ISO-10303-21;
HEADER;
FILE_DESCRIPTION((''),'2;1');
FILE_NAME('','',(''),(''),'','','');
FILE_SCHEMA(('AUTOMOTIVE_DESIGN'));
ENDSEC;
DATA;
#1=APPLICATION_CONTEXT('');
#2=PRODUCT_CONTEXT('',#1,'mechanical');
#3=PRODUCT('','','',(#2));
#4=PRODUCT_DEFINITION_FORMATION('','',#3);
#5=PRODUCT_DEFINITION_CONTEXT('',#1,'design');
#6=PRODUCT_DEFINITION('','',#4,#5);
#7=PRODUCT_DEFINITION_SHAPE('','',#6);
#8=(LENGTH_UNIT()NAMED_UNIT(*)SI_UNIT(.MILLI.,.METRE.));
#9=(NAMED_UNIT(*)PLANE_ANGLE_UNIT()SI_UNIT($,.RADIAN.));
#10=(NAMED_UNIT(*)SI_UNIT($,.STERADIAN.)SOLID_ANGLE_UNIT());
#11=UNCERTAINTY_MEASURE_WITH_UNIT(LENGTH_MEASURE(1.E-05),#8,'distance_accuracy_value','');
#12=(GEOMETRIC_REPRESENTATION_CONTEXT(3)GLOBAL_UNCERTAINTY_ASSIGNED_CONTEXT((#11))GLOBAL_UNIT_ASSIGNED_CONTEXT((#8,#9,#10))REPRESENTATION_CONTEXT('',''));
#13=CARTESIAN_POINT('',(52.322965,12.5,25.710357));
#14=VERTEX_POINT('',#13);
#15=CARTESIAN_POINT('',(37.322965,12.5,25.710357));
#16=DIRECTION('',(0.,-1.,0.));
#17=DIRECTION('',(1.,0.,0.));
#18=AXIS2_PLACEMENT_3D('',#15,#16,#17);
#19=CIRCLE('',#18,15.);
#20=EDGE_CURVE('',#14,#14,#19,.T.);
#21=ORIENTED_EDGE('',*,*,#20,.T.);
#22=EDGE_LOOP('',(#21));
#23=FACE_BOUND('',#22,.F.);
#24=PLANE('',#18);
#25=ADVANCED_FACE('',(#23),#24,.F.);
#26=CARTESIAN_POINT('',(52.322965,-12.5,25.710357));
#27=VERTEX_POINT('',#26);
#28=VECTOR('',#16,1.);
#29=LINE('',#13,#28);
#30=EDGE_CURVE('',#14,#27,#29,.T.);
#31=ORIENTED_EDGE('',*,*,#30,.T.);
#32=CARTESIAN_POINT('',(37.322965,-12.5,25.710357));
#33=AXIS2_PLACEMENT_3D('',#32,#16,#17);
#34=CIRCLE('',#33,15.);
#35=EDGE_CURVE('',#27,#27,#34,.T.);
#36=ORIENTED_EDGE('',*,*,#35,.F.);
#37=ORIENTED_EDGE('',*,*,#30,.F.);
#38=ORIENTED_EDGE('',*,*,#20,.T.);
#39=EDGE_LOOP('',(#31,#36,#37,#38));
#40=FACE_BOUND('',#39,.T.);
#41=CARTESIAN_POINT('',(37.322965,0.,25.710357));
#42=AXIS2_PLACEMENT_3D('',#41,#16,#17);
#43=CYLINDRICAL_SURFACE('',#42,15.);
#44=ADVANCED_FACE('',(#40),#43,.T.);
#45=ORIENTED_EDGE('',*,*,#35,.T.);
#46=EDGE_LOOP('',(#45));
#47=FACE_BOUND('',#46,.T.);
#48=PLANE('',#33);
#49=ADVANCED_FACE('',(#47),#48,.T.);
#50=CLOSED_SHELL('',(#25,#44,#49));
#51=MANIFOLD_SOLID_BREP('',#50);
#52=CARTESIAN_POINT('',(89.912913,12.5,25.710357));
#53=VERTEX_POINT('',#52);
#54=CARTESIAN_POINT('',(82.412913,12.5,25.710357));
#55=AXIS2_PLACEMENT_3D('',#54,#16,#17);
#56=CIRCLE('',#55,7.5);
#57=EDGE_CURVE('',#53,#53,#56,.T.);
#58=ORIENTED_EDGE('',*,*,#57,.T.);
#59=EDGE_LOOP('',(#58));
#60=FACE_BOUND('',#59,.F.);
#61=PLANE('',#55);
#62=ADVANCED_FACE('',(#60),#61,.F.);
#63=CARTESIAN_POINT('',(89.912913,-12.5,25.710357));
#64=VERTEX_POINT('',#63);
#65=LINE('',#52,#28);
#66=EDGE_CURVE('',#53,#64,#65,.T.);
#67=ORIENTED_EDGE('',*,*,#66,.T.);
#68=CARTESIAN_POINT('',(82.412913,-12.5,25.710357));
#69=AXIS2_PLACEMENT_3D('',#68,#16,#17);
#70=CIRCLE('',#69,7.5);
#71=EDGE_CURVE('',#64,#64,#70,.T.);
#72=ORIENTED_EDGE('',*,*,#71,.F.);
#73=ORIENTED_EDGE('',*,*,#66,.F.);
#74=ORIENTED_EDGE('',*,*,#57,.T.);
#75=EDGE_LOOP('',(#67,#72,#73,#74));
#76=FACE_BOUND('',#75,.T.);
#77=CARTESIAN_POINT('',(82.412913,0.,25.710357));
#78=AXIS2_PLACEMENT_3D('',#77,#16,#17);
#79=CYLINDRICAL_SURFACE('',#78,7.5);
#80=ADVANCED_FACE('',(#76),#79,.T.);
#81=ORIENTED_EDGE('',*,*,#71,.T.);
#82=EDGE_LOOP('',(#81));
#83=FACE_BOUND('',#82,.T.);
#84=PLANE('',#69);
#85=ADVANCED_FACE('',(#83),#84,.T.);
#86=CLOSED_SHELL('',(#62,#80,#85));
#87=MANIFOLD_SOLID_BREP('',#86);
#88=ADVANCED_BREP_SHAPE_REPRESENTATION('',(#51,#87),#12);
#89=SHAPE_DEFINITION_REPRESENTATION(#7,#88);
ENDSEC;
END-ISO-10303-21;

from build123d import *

# Parameters (mm, degrees)
F0_R     = 15
F1_DEPTH = 12.5
F0_R_2   = 7.5


# Not quite as in the source:
# - the program builds the solid bodies; features that only make, move or delete a surface that nothing else refers to are left out


with BuildPart() as f1:
    # F0 (on Front) → F1 (new body, symmetric)
    with BuildSketch(Plane.XZ):
        with Locations((37.3229645193, 25.7103565931)):
            Circle(F0_R)
    extrude(amount=F1_DEPTH, both=True)


with BuildPart() as f1b:
    # F0 (on Front) → F1, piece 2 (new body, symmetric)
    with BuildSketch(Plane.XZ):
        with Locations((82.4129134417, 25.7103565931)):
            Circle(F0_R_2)
    extrude(amount=F1_DEPTH, both=True)


solid = Compound([f1.part, f1b.part])
